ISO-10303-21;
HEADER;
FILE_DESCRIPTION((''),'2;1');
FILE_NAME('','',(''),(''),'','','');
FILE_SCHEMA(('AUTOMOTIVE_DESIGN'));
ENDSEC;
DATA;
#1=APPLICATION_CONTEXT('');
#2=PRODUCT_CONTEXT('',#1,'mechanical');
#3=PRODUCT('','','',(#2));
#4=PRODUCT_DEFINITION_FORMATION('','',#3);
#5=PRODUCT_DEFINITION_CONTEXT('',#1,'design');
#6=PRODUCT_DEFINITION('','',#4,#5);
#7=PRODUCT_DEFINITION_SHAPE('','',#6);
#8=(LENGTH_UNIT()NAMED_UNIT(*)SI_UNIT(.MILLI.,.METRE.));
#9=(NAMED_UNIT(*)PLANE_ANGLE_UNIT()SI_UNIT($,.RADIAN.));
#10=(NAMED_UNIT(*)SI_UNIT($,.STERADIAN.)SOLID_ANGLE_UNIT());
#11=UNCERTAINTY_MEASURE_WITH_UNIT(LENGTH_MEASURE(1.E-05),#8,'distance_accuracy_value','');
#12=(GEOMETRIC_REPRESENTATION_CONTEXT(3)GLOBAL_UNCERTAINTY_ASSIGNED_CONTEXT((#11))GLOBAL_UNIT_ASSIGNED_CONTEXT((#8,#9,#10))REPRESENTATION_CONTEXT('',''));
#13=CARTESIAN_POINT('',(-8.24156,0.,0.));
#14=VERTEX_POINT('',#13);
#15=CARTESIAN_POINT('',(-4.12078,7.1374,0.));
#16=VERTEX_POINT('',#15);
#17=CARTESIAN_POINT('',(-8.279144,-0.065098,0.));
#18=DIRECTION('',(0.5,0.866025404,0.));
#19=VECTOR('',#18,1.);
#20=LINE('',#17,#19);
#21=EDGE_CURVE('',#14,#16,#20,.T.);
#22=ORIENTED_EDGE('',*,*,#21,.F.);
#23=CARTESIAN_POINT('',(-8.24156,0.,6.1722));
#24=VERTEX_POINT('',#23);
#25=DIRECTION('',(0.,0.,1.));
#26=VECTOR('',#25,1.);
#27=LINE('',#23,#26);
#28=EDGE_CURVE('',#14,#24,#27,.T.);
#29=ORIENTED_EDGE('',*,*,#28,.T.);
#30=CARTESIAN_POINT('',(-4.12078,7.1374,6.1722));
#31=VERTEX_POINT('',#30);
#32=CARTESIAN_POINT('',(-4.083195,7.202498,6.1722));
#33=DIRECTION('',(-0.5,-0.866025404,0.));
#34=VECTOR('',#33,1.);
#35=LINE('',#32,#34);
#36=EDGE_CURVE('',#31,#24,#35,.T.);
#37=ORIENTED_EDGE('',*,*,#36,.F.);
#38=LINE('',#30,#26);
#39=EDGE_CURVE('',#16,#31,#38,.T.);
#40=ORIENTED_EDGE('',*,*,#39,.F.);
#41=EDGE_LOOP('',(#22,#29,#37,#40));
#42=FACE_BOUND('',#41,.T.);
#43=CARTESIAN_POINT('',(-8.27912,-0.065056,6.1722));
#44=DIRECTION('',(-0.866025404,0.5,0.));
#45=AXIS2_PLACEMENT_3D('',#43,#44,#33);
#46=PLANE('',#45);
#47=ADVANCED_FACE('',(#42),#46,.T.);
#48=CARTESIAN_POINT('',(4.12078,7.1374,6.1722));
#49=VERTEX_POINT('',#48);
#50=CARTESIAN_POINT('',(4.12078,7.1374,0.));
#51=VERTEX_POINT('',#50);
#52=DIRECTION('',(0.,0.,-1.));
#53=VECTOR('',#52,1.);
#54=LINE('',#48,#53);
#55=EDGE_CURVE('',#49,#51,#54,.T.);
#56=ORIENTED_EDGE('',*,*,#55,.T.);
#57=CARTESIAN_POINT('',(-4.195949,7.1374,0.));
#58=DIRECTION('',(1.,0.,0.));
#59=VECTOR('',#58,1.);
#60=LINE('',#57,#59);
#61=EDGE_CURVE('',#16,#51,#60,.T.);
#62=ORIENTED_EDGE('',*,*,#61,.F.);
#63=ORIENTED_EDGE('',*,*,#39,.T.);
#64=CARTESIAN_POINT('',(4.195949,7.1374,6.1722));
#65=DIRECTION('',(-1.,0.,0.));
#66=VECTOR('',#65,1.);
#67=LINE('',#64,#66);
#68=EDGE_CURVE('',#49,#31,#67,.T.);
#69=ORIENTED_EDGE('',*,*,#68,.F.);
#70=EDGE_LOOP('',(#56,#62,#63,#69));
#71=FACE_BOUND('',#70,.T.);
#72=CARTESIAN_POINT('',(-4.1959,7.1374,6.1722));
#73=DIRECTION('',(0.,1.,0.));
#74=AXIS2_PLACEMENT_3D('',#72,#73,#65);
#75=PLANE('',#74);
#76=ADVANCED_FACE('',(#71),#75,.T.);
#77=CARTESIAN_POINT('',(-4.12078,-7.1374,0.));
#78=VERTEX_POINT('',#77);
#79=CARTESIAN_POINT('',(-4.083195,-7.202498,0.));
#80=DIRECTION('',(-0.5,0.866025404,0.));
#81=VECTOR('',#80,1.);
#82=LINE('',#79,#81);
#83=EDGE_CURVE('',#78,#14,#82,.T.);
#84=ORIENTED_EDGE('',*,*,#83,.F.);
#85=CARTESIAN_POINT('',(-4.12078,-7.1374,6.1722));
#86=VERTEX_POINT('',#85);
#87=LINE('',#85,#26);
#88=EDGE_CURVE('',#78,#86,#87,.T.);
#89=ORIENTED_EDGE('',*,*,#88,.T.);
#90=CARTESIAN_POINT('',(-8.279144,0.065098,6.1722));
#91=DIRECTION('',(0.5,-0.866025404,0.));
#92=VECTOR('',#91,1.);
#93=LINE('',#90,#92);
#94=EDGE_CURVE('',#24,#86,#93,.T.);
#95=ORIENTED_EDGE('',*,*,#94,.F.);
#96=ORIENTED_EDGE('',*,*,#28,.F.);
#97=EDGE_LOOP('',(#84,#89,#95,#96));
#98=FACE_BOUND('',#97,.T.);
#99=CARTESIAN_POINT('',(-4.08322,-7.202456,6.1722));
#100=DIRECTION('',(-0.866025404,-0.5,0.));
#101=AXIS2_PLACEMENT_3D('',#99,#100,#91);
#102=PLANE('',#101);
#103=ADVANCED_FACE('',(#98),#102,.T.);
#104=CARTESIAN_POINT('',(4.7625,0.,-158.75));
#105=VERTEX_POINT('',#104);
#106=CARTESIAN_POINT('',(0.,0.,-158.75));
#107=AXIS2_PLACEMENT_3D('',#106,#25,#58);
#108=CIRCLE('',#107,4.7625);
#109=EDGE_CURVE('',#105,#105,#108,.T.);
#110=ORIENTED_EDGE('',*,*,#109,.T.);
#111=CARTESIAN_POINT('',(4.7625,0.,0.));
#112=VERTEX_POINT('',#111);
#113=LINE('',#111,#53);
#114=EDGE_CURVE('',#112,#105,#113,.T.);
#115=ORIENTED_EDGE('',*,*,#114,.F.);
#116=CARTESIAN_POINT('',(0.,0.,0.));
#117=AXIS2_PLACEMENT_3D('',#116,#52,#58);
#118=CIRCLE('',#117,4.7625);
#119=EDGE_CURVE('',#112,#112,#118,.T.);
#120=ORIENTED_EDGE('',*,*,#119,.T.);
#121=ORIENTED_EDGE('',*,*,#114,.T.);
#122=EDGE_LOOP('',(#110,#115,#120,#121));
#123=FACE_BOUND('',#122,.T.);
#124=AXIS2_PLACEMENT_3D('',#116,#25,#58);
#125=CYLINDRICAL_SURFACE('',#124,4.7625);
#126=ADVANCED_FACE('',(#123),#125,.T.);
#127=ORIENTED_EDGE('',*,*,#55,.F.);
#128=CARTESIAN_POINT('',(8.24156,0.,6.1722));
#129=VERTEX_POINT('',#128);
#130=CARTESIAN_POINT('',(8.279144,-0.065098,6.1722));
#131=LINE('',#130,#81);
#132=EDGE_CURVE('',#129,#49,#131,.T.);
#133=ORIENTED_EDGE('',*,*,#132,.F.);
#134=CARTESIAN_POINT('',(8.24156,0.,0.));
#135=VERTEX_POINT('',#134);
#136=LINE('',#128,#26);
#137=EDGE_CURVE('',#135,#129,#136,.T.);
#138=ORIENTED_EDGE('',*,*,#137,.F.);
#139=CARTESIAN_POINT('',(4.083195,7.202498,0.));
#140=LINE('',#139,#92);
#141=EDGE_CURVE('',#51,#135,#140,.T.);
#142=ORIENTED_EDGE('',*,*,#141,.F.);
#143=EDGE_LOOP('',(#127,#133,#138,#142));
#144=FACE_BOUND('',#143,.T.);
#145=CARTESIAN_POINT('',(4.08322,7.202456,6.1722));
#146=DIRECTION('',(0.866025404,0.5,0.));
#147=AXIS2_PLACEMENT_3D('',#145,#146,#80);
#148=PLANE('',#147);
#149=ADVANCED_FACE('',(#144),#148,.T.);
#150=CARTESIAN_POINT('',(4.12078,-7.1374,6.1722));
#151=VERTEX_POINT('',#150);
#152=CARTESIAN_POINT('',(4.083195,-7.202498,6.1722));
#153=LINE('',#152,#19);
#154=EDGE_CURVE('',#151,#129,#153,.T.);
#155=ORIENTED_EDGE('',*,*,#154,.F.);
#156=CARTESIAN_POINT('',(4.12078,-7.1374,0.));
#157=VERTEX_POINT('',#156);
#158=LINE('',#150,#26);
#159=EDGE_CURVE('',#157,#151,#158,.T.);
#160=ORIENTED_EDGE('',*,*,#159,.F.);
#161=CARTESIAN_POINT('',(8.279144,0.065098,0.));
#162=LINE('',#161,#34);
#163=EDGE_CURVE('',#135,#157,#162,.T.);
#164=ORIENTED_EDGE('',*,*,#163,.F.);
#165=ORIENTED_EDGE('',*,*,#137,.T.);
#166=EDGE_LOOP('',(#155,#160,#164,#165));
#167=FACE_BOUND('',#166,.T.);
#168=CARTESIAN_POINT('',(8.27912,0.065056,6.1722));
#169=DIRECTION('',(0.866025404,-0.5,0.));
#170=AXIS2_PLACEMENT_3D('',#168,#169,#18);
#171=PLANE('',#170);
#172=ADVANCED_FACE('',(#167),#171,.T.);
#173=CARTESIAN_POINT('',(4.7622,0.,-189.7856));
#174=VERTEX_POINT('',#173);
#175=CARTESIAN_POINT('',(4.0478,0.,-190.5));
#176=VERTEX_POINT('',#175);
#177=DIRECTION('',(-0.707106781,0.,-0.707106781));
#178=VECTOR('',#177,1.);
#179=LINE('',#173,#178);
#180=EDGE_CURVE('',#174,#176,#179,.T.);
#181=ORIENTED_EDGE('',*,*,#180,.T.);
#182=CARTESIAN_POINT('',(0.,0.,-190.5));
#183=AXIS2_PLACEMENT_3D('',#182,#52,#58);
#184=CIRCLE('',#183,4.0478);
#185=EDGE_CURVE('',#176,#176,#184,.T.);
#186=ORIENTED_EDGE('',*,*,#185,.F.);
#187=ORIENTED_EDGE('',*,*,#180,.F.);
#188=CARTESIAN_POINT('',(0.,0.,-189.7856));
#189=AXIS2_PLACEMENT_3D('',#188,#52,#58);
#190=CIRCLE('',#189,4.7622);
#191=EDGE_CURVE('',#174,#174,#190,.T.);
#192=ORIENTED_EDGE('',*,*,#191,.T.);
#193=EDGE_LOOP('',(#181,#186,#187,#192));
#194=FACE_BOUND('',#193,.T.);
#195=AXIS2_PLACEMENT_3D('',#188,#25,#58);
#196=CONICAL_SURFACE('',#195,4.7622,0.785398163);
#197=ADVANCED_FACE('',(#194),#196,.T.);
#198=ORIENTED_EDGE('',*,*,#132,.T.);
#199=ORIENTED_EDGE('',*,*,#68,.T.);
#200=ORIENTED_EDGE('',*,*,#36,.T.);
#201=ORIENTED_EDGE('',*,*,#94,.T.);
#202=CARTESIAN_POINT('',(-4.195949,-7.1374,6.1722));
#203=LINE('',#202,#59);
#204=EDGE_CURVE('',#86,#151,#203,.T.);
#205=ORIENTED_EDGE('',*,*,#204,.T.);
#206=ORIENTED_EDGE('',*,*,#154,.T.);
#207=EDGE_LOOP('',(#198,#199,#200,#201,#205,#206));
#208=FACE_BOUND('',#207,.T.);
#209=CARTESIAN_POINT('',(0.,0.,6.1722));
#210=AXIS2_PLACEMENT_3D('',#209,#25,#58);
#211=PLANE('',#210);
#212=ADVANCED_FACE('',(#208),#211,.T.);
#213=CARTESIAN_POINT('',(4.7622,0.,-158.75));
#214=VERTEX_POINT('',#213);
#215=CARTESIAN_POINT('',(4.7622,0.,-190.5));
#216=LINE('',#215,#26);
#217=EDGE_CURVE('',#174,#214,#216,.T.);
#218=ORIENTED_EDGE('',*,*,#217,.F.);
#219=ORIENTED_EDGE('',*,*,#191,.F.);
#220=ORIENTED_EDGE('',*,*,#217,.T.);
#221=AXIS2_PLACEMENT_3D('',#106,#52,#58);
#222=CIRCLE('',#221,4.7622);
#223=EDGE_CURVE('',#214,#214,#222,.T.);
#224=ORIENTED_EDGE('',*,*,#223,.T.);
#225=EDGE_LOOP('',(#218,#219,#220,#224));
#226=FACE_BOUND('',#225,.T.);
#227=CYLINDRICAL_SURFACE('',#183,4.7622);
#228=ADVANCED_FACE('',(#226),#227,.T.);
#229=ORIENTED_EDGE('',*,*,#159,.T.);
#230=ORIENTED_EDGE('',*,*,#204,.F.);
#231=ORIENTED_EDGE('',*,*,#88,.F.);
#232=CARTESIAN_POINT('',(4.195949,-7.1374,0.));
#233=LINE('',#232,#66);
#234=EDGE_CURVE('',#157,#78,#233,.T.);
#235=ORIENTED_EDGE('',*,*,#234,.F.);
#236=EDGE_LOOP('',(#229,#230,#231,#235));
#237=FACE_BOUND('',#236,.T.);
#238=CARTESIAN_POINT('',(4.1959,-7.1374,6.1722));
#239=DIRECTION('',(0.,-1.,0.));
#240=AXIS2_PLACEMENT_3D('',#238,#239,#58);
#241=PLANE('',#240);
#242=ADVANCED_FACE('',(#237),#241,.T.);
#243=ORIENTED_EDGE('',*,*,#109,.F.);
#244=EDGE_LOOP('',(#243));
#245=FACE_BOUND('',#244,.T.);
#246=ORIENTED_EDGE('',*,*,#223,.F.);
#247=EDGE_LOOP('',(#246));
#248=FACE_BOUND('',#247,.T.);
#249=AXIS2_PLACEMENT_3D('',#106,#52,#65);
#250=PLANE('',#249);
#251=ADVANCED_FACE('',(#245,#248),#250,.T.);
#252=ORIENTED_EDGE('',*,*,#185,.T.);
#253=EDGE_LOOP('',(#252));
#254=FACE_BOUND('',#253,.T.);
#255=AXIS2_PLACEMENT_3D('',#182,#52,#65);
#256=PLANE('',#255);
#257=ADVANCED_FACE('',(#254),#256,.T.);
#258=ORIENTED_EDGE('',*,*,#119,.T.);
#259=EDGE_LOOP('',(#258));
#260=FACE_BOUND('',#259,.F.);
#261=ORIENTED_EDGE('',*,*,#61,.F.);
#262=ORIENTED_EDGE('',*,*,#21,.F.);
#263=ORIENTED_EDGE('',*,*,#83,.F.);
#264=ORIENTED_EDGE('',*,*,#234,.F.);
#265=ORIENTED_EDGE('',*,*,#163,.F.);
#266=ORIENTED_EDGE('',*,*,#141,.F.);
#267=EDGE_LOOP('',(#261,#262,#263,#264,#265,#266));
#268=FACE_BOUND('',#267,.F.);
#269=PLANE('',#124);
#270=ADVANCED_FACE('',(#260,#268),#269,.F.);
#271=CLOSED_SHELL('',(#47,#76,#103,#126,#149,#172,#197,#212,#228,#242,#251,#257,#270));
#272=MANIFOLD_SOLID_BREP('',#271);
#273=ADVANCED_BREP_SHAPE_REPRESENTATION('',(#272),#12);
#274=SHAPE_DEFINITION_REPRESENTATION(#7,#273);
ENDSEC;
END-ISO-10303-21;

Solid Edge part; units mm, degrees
sketch "Sketch1" plane through (0, 0, 0) normal (0, 0, 1) x (1, 0, 0)
  circle A0 centre (0, 0) radius 8.2794
  dimension "D1" = 16.5588
extrude "Protrusion1" add sketch "Sketch1" along normal blind 6.1722
sketch "Sketch2" plane through (0, 0, 0) normal (0, 0, -1) x (1, 0, 0)
  circle A0 centre (0, 0) radius 4.7625
extrude "Protrusion2" add sketch "Sketch2" along normal blind 190.5
sketch "Sketch3" plane through (0, 0, -190.5) normal (0, 0, -1) x (1, 0, 0)
  circle A0 centre (0, 0) radius 4.7622
extrude "Cutout1" cut sketch "Sketch3" against normal blind 31.75 flip side to cut
chamfer "Chamfer_1" distance 0.7144 angle 45 1 edges at (-4.7622, 0, -190.5)
sketch "Sketch4" plane through (0, 0, 6.1722) normal (0, 0, 1) x (1, 0, 0)
  line L0 (-4.1959, 7.1374) -> (4.1959, 7.1374)
  dimension "D1" = 14.2748
extrude "Cutout2" cut sketch "Sketch4" against normal up to next material side at (0, 7.1874, 6.1722)
pattern_circular "Pattern1" count 6 over 360 about axis through (0, 0, 6.1722) along (0, 0, 1) of "Cutout2"
properties part number "117612"
